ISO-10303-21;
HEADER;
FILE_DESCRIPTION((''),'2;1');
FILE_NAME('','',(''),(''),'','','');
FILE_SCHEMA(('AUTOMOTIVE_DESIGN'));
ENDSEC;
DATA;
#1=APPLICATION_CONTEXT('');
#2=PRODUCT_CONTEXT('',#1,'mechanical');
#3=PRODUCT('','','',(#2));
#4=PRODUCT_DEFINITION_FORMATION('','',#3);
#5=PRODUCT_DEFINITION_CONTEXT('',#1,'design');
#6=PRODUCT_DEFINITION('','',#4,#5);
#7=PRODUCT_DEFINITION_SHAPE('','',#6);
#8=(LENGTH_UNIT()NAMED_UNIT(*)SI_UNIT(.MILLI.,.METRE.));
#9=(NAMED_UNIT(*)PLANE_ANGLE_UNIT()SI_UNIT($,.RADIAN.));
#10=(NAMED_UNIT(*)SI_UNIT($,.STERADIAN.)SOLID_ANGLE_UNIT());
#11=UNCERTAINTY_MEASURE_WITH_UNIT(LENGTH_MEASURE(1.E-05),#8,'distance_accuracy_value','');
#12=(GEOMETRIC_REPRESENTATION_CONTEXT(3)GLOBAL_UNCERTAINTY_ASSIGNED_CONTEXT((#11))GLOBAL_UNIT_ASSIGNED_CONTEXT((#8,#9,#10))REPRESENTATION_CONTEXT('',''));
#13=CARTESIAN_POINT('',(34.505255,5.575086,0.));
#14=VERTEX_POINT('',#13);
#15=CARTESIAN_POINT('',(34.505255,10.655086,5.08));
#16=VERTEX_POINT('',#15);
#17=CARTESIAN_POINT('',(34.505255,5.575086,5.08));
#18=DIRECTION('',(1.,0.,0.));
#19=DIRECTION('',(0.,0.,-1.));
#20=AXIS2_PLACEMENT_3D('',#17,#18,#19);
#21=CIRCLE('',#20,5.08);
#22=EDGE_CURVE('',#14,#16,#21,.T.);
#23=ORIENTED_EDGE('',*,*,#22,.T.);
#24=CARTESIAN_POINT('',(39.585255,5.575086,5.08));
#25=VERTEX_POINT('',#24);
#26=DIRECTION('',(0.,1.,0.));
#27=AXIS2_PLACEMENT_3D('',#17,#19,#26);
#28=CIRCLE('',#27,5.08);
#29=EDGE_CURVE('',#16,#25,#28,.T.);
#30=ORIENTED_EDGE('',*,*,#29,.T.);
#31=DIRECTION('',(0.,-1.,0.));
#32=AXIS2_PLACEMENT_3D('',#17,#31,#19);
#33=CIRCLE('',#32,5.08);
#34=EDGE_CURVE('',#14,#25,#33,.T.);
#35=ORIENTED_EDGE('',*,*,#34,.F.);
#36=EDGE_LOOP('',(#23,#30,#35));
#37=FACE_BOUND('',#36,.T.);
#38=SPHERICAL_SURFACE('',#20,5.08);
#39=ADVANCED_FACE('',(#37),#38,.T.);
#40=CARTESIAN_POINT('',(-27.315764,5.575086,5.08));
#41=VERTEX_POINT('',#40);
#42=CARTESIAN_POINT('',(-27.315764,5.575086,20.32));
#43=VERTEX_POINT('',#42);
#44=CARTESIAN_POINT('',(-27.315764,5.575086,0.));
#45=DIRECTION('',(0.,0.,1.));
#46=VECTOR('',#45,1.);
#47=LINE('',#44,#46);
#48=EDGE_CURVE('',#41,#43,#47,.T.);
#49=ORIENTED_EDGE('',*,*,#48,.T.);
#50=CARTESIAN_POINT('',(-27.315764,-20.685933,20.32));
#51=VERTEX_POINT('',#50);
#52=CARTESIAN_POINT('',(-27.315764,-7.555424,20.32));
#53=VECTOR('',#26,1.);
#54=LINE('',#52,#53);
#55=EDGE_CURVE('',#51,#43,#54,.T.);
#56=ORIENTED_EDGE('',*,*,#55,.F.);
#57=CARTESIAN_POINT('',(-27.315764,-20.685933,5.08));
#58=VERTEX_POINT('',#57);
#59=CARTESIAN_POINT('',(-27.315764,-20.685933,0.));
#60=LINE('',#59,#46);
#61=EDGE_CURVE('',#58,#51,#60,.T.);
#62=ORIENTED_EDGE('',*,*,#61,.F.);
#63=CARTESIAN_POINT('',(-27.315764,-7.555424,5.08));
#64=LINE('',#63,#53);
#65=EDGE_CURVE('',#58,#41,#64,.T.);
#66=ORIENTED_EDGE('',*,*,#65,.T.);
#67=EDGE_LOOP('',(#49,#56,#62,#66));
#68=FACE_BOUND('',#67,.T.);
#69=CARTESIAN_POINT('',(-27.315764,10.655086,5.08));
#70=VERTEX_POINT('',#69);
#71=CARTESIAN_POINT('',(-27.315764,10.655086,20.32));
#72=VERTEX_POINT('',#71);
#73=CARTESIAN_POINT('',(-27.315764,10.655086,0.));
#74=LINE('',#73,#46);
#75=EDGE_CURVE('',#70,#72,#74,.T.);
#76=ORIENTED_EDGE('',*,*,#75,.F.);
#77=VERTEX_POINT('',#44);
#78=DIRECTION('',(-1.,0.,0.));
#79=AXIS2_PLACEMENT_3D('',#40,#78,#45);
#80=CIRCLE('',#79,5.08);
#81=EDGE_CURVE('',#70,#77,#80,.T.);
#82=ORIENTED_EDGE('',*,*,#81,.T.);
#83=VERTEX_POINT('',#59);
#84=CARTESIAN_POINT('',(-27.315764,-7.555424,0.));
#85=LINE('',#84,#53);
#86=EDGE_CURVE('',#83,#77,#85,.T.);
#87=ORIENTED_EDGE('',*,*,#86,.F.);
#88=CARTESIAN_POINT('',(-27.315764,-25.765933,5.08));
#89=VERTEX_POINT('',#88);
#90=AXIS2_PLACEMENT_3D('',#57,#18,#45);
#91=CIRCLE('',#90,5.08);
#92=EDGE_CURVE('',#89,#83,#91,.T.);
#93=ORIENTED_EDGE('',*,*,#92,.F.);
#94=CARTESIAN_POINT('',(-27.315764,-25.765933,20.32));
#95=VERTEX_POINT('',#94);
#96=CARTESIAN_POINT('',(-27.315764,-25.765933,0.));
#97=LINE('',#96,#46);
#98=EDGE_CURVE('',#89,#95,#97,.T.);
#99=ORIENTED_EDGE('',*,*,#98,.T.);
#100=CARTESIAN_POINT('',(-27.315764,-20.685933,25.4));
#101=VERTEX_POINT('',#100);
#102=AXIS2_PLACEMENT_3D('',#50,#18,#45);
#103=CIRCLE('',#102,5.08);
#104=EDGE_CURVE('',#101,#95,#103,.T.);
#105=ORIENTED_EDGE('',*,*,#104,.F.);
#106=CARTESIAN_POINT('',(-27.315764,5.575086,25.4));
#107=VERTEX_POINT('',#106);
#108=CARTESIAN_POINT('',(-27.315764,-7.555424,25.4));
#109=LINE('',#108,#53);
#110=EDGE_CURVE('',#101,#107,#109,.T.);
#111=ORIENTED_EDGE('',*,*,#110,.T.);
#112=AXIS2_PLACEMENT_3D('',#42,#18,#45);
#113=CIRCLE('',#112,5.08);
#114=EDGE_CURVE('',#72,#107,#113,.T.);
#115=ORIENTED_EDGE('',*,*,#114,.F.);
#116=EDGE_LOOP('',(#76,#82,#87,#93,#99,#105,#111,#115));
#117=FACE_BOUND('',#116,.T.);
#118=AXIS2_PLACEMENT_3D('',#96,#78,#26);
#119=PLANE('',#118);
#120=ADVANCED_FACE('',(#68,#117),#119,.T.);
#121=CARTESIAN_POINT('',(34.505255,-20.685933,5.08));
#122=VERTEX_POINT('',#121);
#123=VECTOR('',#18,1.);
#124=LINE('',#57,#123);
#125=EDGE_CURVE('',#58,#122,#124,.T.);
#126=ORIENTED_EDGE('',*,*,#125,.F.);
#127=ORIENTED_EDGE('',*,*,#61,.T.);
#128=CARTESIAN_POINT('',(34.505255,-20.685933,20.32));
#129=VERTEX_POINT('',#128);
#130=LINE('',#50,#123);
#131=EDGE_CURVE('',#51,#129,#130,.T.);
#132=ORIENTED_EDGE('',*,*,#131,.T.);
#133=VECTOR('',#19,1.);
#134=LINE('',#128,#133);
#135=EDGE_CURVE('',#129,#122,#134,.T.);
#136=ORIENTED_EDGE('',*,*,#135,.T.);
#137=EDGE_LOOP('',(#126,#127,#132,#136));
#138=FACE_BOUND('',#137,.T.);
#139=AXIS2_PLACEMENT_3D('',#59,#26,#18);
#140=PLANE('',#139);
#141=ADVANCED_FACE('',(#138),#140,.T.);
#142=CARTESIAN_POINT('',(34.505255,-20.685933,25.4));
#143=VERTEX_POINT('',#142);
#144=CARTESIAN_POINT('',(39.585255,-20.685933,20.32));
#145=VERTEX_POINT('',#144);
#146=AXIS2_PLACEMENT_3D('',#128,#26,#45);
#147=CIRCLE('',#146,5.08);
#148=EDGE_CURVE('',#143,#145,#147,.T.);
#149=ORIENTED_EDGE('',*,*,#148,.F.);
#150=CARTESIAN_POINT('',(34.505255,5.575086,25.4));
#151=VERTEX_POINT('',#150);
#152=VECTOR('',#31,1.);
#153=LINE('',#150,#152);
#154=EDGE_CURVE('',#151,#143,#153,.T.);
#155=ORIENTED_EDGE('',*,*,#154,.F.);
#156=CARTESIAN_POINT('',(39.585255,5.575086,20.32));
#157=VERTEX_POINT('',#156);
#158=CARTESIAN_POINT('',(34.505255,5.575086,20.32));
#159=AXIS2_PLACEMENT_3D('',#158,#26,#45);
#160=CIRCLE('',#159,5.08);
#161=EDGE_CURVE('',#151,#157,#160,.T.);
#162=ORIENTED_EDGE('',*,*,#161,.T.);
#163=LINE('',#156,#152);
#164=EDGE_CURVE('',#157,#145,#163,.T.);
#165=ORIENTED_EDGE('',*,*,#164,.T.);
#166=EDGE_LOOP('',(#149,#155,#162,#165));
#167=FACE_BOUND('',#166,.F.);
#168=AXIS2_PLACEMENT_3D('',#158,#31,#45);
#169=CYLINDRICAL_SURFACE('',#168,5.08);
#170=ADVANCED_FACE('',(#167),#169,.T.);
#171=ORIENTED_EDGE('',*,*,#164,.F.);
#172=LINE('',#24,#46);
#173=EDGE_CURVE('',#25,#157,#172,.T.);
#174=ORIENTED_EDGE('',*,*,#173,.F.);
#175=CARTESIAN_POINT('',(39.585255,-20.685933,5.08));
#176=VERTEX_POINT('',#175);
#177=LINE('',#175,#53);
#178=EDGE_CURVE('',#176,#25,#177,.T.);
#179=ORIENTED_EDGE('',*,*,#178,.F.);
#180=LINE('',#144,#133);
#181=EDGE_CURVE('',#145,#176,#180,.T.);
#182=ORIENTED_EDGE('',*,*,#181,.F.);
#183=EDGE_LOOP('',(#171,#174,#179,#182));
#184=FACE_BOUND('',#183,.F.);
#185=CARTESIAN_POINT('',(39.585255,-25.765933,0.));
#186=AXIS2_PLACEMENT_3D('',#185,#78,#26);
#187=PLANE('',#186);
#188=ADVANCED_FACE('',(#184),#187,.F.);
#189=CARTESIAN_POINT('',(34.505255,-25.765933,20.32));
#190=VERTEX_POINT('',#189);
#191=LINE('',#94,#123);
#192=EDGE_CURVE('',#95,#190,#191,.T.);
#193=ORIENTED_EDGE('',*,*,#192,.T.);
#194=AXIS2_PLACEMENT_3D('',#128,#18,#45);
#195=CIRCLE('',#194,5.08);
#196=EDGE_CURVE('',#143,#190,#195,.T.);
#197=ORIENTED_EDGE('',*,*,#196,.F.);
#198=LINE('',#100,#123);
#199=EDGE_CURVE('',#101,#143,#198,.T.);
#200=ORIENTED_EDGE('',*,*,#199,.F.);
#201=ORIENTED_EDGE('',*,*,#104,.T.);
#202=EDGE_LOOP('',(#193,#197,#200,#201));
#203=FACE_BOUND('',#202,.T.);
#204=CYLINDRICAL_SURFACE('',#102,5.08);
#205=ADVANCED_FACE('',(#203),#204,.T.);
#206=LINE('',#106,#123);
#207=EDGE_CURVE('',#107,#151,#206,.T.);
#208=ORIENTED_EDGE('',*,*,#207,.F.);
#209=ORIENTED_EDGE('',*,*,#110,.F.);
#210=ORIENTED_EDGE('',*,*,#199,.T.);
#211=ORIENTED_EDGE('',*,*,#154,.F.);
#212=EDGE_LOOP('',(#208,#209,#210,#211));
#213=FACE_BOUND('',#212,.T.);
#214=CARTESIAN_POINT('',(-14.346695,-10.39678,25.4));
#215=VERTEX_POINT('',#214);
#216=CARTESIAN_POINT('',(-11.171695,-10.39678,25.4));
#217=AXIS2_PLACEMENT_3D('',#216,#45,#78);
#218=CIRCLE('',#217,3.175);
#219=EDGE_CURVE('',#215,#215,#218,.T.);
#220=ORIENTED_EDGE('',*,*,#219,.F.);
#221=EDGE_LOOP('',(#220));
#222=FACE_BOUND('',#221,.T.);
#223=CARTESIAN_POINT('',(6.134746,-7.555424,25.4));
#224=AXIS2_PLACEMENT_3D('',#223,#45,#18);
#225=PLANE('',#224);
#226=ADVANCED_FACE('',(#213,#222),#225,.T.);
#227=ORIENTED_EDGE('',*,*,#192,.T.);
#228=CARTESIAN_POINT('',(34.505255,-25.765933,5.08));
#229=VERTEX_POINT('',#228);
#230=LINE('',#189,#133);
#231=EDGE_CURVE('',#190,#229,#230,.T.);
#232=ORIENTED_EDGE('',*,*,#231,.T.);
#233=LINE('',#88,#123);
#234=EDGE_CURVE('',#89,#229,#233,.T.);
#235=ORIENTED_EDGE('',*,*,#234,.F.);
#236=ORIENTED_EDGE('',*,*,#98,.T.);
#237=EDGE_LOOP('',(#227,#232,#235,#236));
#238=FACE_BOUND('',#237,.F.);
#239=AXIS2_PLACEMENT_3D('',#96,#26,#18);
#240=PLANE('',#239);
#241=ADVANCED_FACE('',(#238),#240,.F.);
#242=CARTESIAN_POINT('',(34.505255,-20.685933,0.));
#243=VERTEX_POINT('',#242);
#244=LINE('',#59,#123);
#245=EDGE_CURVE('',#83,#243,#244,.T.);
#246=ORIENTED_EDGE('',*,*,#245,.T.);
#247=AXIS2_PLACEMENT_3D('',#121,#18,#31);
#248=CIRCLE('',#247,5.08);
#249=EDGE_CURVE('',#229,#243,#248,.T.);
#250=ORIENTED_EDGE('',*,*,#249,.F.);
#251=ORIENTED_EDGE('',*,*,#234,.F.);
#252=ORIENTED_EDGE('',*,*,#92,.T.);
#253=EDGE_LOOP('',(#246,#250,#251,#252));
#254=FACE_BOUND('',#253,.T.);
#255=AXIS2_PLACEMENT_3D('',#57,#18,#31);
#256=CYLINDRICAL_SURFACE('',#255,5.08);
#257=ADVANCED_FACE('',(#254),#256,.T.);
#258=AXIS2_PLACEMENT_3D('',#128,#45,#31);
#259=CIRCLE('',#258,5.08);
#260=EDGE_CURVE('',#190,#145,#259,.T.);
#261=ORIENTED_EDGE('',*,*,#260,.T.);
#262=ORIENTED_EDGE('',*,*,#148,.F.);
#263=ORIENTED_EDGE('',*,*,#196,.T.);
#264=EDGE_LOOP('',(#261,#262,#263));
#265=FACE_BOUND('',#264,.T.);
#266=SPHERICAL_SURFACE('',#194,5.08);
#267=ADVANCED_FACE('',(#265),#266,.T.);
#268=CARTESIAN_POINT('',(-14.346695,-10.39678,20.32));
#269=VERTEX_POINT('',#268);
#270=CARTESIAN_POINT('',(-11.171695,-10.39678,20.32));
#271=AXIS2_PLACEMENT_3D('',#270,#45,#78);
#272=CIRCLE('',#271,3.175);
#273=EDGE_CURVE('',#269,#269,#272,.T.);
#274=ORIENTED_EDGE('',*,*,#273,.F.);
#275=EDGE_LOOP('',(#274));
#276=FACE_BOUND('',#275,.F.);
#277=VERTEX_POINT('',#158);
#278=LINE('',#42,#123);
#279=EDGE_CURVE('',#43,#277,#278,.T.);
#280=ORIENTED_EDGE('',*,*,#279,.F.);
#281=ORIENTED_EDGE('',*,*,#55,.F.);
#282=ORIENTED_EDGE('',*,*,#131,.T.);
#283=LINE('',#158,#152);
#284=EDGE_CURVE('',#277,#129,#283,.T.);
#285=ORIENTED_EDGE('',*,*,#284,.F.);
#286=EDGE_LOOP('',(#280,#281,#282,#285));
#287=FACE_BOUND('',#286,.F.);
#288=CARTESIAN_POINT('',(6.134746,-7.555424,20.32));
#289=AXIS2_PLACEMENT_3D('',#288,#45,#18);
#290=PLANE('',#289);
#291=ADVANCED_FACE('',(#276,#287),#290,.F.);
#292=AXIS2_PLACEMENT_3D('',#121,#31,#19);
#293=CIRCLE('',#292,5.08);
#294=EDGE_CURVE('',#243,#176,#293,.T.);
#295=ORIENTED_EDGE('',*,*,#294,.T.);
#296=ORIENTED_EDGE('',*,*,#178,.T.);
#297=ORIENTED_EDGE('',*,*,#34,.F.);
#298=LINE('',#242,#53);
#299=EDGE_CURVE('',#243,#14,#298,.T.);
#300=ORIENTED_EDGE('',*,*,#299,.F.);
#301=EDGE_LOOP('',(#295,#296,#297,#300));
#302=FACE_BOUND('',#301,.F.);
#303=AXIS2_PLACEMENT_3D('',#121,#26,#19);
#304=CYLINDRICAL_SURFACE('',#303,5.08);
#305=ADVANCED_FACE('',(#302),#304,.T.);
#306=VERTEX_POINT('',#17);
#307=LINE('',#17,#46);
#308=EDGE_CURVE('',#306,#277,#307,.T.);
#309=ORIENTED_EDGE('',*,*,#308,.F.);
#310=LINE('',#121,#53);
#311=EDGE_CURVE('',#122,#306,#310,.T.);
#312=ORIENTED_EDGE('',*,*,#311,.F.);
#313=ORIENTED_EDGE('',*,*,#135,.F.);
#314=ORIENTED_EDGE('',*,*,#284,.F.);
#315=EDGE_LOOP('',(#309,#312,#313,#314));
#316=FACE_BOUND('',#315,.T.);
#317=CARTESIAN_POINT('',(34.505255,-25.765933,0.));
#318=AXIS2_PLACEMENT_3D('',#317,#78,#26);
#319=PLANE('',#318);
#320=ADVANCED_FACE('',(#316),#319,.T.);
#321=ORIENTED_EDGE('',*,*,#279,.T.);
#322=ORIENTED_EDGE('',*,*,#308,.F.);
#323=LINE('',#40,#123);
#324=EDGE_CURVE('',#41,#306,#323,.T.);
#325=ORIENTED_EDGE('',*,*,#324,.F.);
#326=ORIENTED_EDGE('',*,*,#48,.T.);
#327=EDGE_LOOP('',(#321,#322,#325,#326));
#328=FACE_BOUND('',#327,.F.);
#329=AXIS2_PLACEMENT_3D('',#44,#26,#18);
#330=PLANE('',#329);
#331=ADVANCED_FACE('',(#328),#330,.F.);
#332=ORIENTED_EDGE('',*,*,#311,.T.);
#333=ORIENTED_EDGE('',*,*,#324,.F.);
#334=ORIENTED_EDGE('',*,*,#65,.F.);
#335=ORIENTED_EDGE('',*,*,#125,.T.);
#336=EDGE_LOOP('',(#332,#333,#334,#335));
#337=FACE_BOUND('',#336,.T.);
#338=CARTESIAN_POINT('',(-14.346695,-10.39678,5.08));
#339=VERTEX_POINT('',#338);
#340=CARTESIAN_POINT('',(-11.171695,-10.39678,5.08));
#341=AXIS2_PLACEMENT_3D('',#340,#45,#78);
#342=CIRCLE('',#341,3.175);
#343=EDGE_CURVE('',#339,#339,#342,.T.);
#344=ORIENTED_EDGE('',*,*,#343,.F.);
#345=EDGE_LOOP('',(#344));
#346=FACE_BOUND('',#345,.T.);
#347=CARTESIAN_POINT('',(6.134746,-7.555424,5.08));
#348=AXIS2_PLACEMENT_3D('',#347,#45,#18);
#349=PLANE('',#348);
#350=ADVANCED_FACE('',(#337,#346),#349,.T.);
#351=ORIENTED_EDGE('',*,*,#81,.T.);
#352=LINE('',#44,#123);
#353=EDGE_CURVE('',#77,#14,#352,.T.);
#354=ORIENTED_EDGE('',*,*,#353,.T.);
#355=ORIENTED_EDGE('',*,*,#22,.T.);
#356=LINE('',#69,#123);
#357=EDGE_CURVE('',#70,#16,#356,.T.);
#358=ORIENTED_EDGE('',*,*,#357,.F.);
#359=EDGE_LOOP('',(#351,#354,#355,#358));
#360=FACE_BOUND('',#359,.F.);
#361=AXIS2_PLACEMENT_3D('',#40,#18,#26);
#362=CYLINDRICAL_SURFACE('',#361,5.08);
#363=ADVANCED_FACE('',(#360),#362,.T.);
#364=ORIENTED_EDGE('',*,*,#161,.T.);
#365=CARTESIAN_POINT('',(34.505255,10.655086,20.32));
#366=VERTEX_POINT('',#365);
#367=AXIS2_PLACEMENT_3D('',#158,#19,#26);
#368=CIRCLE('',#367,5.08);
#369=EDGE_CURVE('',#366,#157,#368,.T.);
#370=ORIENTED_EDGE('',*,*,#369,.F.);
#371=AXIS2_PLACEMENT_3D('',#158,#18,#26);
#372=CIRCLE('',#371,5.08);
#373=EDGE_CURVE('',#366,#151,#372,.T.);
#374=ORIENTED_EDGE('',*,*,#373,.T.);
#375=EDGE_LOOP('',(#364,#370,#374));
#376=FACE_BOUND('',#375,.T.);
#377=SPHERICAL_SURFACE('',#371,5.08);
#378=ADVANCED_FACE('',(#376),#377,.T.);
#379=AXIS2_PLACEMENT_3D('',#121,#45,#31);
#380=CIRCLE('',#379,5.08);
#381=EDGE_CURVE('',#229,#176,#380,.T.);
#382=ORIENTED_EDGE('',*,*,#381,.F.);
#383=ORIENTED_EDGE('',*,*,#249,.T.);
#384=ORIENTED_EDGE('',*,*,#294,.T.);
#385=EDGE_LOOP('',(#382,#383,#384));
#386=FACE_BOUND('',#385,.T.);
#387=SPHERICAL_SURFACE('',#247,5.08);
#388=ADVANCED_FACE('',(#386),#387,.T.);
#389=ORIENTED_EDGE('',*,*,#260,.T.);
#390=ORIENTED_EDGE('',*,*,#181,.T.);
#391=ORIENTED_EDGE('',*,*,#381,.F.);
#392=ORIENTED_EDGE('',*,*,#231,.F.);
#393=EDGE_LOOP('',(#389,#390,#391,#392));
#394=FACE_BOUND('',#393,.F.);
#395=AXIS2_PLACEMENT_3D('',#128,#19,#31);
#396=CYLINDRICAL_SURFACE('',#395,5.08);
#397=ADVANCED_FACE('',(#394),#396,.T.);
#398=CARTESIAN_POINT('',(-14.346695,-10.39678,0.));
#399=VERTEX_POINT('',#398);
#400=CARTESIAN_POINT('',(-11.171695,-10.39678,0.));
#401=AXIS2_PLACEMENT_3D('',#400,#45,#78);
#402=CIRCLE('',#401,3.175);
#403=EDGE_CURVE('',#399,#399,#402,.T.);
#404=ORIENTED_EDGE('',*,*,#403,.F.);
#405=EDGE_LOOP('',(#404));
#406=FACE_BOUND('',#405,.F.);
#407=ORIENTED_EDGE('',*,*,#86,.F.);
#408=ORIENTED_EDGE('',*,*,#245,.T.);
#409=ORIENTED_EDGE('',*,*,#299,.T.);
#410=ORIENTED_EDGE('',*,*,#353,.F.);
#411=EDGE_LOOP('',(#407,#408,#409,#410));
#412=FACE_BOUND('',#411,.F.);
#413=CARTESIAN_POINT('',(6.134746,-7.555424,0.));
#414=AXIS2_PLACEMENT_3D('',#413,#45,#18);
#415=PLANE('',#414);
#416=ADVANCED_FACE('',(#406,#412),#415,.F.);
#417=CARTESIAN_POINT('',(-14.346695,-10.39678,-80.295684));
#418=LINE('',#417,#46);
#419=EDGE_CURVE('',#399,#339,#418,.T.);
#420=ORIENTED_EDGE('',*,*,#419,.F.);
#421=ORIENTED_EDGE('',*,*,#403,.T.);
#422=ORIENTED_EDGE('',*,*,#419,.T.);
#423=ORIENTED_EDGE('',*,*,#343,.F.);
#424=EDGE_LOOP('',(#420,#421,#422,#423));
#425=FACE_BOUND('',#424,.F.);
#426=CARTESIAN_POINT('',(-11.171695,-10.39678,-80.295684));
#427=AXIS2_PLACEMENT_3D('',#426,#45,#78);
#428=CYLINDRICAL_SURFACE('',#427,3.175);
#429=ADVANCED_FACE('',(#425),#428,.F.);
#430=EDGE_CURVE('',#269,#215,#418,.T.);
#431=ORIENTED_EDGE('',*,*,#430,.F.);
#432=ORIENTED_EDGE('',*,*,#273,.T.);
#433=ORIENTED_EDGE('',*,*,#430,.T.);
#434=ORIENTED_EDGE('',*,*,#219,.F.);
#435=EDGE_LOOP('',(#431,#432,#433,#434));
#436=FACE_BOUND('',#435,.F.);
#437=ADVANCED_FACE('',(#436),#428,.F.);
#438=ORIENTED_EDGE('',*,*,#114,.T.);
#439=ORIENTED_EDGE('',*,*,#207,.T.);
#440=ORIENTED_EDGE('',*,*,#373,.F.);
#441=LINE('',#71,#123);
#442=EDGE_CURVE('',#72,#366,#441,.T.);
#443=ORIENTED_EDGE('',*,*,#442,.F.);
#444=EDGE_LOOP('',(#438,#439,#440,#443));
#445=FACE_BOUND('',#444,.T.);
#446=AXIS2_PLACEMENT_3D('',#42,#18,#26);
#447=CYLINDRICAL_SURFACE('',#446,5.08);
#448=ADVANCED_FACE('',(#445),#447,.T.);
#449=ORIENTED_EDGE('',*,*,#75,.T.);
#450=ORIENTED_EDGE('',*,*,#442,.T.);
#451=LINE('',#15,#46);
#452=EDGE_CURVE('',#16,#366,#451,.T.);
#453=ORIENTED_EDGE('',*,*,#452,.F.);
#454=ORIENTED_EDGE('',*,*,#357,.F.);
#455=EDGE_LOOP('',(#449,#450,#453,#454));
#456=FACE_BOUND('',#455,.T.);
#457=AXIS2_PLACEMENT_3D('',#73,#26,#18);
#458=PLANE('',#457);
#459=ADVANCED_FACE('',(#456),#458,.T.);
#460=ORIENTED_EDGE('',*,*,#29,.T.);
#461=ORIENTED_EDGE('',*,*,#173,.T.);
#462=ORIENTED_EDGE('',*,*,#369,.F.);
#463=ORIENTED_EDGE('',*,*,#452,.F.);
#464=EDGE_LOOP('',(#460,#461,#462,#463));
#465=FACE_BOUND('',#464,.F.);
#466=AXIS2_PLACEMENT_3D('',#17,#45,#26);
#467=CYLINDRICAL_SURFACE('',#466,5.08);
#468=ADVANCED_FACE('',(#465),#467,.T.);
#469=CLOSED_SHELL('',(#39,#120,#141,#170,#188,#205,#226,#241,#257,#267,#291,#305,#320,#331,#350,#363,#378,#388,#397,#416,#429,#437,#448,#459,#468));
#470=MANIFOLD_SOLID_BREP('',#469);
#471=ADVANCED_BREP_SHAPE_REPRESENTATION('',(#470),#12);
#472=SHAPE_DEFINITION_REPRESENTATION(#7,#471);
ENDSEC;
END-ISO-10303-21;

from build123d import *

# Parameters (mm, degrees)
F0_W     = 66.9010188431
F0_H     = 36.4210186526
F1_DEPTH = 25.4
F2_R     = 5.08
F3_R     = 5.08
F4_R     = 5.08
F5_R     = 5.08
F6_R     = 5.08
F7_T     = 5.08
F9_D     = 6.35


# Not quite as in the source:
# - a shell that OpenCascade refuses in one call is made with other operations: the cavity is built on its own and cut out


with BuildPart() as f1:
    # F0 (on Top) → F1 (new body)
    with BuildSketch(Plane.XY):
        with Locations((6.1347456649, -7.5554237701)):
            Rectangle(F0_W, F0_H)
    extrude(amount=F1_DEPTH)

    # F2
    f2_edges = [f1.edges().sort_by_distance(p)[0] for p in [
        (6.134746, 10.655086, 25.4),
    ]]
    fillet(f2_edges, radius=F2_R)

    # F3
    f3_edges = [f1.edges().sort_by_distance(p)[0] for p in [
        (6.134746, 10.655086, 0),
    ]]
    fillet(f3_edges, radius=F3_R)

    # F4
    f4_edges = [f1.edges().sort_by_distance(p)[0] for p in [
        (6.134746, -25.765933, 25.4),
    ]]
    fillet(f4_edges, radius=F4_R)

    # F5
    f5_edges = [f1.edges().sort_by_distance(p)[0] for p in [
        (6.134746, -25.765933, 0),
    ]]
    fillet(f5_edges, radius=F5_R)

    # F6
    f6_edges = [f1.edges().sort_by_distance(p)[0] for p in [
        (39.585255, -7.555424, 0),
        (39.585255, 9.167188, 1.487898),
        (39.585255, 9.167188, 23.912102),
        (39.585255, 10.655086, 12.7),
        (39.585255, -7.555424, 25.4),
        (39.585255, -24.278036, 1.487898),
        (39.585255, -25.765933, 12.7),
        (39.585255, -24.278036, 23.912102),
    ]]
    fillet(f6_edges, radius=F6_R)

    # F7: shell of thickness 5.08, made by hand


with BuildPart() as f7_core1:
    # F7_t2: copy of F1
    add(f1.part)

    # the walls: a layer under each face that stays
    f7_faces = [f7_core1.faces().sort_by_distance(p)[0] for p in [
        (39.5852550864, -7.5554237701, 12.7),
        (3.5947456649, -7.5554237701, 0),
        (3.5947456649, -25.7659330964, 12.7),
        (3.5947456649, 10.6550855562, 12.7),
        (3.5947456649, -7.5554237701, 25.4),
    ]]
    thicken(f7_faces, amount=-F7_T, mode=Mode.SUBTRACT)


with BuildPart() as f1_1:
    add(f1.part)

    # what is left inside the walls is the cavity
    f7_cavity = [f7_core1.part.solids().sort_by_distance(p)[0] for p in [
        (3.594746, -11.93226, 5.1308),
    ]]
    add(f7_cavity, mode=Mode.SUBTRACT)

    # F9 (through all)
    with Locations(Plane(origin=(0, 0, 0), x_dir=(1, 0, 0), z_dir=(0, 0, -1))):
        with Locations((-11.171694845, 10.3967795148)):
            Hole(F9_D / 2)


solid = f1_1.part
